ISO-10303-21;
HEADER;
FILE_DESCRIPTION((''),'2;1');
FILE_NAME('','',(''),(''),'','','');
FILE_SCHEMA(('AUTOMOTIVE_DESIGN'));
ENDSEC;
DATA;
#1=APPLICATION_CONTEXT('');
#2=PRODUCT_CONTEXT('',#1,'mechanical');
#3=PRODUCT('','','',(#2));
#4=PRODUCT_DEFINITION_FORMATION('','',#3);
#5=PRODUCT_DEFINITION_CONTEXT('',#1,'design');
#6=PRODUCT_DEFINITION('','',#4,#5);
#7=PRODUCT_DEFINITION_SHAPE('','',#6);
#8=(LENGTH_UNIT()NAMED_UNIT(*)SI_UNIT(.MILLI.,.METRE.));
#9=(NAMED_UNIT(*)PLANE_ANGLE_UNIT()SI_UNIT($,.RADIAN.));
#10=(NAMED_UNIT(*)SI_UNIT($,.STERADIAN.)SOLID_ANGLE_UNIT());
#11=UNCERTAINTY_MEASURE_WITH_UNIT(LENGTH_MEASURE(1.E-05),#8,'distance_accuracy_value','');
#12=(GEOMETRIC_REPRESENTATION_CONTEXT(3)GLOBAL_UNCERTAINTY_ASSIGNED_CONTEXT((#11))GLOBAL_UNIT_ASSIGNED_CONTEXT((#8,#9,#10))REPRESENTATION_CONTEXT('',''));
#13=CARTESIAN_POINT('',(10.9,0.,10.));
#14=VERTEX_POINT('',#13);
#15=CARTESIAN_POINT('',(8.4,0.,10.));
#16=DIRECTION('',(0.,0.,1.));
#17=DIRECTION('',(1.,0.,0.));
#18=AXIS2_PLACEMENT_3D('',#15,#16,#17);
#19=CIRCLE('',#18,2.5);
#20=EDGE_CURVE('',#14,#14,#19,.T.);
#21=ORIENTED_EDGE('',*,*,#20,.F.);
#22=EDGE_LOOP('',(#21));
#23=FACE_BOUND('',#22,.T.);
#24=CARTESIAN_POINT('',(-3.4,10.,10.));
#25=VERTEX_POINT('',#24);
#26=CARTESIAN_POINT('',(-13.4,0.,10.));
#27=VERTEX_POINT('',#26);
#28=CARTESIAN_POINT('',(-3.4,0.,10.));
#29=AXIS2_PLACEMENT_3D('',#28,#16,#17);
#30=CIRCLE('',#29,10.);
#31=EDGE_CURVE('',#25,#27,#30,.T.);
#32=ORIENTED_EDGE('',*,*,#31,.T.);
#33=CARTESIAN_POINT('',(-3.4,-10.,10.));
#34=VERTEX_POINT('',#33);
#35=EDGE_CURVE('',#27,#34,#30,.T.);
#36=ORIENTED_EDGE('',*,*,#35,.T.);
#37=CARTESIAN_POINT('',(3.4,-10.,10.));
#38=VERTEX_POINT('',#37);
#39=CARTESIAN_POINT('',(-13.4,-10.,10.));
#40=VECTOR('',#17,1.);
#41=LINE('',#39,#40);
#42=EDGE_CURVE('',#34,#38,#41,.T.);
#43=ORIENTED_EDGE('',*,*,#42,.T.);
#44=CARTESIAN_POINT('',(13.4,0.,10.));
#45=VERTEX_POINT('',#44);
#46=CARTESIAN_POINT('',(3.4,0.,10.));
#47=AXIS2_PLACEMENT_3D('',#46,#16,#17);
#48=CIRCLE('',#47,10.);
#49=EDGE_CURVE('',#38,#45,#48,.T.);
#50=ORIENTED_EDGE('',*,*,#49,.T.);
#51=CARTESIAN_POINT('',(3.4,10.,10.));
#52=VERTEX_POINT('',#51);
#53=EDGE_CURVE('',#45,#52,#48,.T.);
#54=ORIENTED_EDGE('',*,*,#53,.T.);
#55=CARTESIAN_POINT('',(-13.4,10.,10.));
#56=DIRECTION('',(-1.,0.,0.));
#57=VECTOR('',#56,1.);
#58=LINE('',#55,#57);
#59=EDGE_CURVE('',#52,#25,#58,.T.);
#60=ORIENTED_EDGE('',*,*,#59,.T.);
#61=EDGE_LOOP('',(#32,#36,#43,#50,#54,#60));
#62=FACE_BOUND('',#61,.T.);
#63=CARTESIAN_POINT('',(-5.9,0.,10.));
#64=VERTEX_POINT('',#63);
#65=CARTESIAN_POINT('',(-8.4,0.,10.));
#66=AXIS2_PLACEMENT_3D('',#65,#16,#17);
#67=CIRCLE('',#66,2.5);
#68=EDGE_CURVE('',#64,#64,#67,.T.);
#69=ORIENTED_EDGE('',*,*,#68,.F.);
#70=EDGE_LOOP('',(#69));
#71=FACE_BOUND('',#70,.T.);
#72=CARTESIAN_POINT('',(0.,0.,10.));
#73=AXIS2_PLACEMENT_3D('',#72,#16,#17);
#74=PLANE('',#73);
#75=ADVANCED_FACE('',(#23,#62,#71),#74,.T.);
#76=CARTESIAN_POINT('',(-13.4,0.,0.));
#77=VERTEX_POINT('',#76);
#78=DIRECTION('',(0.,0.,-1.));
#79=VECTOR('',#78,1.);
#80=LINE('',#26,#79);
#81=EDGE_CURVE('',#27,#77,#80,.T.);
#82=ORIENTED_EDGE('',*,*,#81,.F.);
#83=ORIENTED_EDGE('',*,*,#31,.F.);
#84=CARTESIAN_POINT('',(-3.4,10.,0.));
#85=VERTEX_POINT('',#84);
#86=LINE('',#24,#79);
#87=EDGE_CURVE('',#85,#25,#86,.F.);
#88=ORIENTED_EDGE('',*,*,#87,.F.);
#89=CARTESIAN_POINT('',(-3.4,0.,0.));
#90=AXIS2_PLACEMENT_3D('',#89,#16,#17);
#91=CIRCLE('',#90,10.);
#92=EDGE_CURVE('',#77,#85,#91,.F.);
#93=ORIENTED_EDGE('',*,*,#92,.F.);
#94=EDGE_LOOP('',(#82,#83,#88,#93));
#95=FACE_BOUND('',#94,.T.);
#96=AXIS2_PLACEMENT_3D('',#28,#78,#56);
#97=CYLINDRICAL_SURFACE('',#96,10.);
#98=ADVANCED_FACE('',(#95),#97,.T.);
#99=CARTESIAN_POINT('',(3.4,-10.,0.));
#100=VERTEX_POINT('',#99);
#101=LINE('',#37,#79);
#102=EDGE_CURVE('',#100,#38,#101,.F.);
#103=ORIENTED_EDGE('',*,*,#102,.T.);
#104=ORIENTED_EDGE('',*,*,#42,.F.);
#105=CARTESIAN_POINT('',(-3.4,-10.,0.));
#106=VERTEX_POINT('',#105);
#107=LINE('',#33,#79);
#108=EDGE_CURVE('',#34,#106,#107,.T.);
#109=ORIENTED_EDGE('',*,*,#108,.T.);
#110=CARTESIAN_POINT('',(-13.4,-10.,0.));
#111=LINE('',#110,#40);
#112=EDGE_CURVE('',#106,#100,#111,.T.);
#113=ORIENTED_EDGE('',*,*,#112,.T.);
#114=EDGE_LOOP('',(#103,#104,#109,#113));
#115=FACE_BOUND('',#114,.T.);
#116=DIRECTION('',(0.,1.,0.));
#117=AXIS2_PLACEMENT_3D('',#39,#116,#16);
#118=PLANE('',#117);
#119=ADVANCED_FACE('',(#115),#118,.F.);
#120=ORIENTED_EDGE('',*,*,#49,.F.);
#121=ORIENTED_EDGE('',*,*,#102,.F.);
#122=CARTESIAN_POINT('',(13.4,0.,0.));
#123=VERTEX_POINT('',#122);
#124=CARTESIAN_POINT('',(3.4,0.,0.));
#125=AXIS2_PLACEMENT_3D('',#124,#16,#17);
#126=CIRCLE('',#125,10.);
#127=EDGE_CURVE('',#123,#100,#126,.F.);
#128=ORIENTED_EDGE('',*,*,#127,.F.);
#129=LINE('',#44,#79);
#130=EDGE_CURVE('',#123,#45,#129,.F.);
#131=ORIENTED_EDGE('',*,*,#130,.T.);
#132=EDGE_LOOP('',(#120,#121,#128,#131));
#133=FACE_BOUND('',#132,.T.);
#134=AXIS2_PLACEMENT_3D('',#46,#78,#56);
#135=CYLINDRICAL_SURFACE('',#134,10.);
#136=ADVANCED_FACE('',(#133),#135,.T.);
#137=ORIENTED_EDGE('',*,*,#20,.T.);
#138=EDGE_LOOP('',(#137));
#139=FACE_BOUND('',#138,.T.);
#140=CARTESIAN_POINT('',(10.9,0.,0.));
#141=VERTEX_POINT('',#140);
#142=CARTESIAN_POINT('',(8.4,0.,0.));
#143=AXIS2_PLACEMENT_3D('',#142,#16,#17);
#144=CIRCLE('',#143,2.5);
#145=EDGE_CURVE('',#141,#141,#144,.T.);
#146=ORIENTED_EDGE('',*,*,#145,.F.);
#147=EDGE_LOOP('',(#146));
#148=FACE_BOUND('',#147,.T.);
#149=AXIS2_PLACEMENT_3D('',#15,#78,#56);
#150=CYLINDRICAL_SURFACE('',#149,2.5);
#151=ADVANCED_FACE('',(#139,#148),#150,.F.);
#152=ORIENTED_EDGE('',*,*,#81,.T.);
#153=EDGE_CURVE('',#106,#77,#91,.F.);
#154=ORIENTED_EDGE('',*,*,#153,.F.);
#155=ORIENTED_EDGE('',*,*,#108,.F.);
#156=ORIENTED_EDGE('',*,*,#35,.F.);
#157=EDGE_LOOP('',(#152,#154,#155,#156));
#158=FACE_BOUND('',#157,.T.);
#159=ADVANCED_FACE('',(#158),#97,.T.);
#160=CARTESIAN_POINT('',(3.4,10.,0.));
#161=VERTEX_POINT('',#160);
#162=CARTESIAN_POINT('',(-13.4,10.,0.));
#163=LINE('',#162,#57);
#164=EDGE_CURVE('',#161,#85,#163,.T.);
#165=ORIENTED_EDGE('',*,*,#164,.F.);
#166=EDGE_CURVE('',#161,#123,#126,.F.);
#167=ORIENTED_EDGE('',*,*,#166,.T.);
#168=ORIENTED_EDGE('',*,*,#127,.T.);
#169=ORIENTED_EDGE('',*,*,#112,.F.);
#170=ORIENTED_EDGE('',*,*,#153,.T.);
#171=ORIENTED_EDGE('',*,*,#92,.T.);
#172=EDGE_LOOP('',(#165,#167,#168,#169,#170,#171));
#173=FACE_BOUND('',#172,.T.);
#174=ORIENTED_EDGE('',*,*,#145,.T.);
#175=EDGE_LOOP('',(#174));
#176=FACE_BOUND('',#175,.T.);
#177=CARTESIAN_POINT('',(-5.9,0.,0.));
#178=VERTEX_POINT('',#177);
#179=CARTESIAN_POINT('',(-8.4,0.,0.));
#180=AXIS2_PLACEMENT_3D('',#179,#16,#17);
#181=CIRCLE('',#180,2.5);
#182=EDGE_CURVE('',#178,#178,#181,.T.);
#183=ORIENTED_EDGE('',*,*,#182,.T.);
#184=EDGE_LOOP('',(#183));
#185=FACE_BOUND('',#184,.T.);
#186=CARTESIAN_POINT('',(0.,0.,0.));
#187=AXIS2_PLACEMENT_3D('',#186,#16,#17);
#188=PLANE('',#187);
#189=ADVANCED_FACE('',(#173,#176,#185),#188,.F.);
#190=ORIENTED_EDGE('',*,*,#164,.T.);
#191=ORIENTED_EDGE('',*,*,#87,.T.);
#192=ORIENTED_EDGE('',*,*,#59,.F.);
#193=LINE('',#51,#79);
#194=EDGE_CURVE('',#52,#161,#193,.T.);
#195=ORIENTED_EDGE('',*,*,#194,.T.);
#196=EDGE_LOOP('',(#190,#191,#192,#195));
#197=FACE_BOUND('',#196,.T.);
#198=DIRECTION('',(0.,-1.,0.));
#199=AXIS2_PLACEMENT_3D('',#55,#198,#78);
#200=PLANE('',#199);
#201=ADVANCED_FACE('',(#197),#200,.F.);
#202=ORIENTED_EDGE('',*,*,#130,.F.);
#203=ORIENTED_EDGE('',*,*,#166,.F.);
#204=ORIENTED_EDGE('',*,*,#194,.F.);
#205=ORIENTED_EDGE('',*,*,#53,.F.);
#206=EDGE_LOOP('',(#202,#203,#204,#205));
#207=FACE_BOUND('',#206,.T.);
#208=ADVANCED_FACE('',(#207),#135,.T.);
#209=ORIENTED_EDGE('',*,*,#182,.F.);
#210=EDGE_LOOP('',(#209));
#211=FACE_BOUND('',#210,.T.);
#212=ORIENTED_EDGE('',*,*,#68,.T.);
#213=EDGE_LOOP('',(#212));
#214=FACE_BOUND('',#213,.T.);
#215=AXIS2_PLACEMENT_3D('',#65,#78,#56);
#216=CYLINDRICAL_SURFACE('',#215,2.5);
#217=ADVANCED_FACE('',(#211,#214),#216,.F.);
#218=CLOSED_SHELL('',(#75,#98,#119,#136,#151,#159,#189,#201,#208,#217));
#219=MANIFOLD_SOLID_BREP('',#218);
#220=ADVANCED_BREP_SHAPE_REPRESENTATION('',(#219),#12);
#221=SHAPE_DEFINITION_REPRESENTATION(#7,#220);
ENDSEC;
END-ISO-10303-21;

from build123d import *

# Parameters (mm, degrees)
SKETCH1_W           = 26.8
SKETCH1_H           = 20
SKETCH1_R           = 2.5
BOSS_EXTRUDE1_DEPTH = 10
FILLET1_R           = 10


with BuildPart() as part:
    # Sketch1 → Boss-Extrude1 (new body)
    with BuildSketch(Plane.XY):
        Rectangle(SKETCH1_W, SKETCH1_H)
        with Locations((-8.4, 0)):
            Circle(SKETCH1_R, mode=Mode.SUBTRACT)
        with Locations((8.4, 0)):
            Circle(SKETCH1_R, mode=Mode.SUBTRACT)
    extrude(amount=BOSS_EXTRUDE1_DEPTH)

    # Fillet1
    fillet1_edges = [part.edges().sort_by_distance(p)[0] for p in [
        (13.4, -10, 5),
        (13.4, 10, 5),
        (-13.4, -10, 5),
        (-13.4, 10, 5),
    ]]
    fillet(fillet1_edges, radius=FILLET1_R - 0.0001)  # a hair under: the kernel refuses the full size


solid = part.part
